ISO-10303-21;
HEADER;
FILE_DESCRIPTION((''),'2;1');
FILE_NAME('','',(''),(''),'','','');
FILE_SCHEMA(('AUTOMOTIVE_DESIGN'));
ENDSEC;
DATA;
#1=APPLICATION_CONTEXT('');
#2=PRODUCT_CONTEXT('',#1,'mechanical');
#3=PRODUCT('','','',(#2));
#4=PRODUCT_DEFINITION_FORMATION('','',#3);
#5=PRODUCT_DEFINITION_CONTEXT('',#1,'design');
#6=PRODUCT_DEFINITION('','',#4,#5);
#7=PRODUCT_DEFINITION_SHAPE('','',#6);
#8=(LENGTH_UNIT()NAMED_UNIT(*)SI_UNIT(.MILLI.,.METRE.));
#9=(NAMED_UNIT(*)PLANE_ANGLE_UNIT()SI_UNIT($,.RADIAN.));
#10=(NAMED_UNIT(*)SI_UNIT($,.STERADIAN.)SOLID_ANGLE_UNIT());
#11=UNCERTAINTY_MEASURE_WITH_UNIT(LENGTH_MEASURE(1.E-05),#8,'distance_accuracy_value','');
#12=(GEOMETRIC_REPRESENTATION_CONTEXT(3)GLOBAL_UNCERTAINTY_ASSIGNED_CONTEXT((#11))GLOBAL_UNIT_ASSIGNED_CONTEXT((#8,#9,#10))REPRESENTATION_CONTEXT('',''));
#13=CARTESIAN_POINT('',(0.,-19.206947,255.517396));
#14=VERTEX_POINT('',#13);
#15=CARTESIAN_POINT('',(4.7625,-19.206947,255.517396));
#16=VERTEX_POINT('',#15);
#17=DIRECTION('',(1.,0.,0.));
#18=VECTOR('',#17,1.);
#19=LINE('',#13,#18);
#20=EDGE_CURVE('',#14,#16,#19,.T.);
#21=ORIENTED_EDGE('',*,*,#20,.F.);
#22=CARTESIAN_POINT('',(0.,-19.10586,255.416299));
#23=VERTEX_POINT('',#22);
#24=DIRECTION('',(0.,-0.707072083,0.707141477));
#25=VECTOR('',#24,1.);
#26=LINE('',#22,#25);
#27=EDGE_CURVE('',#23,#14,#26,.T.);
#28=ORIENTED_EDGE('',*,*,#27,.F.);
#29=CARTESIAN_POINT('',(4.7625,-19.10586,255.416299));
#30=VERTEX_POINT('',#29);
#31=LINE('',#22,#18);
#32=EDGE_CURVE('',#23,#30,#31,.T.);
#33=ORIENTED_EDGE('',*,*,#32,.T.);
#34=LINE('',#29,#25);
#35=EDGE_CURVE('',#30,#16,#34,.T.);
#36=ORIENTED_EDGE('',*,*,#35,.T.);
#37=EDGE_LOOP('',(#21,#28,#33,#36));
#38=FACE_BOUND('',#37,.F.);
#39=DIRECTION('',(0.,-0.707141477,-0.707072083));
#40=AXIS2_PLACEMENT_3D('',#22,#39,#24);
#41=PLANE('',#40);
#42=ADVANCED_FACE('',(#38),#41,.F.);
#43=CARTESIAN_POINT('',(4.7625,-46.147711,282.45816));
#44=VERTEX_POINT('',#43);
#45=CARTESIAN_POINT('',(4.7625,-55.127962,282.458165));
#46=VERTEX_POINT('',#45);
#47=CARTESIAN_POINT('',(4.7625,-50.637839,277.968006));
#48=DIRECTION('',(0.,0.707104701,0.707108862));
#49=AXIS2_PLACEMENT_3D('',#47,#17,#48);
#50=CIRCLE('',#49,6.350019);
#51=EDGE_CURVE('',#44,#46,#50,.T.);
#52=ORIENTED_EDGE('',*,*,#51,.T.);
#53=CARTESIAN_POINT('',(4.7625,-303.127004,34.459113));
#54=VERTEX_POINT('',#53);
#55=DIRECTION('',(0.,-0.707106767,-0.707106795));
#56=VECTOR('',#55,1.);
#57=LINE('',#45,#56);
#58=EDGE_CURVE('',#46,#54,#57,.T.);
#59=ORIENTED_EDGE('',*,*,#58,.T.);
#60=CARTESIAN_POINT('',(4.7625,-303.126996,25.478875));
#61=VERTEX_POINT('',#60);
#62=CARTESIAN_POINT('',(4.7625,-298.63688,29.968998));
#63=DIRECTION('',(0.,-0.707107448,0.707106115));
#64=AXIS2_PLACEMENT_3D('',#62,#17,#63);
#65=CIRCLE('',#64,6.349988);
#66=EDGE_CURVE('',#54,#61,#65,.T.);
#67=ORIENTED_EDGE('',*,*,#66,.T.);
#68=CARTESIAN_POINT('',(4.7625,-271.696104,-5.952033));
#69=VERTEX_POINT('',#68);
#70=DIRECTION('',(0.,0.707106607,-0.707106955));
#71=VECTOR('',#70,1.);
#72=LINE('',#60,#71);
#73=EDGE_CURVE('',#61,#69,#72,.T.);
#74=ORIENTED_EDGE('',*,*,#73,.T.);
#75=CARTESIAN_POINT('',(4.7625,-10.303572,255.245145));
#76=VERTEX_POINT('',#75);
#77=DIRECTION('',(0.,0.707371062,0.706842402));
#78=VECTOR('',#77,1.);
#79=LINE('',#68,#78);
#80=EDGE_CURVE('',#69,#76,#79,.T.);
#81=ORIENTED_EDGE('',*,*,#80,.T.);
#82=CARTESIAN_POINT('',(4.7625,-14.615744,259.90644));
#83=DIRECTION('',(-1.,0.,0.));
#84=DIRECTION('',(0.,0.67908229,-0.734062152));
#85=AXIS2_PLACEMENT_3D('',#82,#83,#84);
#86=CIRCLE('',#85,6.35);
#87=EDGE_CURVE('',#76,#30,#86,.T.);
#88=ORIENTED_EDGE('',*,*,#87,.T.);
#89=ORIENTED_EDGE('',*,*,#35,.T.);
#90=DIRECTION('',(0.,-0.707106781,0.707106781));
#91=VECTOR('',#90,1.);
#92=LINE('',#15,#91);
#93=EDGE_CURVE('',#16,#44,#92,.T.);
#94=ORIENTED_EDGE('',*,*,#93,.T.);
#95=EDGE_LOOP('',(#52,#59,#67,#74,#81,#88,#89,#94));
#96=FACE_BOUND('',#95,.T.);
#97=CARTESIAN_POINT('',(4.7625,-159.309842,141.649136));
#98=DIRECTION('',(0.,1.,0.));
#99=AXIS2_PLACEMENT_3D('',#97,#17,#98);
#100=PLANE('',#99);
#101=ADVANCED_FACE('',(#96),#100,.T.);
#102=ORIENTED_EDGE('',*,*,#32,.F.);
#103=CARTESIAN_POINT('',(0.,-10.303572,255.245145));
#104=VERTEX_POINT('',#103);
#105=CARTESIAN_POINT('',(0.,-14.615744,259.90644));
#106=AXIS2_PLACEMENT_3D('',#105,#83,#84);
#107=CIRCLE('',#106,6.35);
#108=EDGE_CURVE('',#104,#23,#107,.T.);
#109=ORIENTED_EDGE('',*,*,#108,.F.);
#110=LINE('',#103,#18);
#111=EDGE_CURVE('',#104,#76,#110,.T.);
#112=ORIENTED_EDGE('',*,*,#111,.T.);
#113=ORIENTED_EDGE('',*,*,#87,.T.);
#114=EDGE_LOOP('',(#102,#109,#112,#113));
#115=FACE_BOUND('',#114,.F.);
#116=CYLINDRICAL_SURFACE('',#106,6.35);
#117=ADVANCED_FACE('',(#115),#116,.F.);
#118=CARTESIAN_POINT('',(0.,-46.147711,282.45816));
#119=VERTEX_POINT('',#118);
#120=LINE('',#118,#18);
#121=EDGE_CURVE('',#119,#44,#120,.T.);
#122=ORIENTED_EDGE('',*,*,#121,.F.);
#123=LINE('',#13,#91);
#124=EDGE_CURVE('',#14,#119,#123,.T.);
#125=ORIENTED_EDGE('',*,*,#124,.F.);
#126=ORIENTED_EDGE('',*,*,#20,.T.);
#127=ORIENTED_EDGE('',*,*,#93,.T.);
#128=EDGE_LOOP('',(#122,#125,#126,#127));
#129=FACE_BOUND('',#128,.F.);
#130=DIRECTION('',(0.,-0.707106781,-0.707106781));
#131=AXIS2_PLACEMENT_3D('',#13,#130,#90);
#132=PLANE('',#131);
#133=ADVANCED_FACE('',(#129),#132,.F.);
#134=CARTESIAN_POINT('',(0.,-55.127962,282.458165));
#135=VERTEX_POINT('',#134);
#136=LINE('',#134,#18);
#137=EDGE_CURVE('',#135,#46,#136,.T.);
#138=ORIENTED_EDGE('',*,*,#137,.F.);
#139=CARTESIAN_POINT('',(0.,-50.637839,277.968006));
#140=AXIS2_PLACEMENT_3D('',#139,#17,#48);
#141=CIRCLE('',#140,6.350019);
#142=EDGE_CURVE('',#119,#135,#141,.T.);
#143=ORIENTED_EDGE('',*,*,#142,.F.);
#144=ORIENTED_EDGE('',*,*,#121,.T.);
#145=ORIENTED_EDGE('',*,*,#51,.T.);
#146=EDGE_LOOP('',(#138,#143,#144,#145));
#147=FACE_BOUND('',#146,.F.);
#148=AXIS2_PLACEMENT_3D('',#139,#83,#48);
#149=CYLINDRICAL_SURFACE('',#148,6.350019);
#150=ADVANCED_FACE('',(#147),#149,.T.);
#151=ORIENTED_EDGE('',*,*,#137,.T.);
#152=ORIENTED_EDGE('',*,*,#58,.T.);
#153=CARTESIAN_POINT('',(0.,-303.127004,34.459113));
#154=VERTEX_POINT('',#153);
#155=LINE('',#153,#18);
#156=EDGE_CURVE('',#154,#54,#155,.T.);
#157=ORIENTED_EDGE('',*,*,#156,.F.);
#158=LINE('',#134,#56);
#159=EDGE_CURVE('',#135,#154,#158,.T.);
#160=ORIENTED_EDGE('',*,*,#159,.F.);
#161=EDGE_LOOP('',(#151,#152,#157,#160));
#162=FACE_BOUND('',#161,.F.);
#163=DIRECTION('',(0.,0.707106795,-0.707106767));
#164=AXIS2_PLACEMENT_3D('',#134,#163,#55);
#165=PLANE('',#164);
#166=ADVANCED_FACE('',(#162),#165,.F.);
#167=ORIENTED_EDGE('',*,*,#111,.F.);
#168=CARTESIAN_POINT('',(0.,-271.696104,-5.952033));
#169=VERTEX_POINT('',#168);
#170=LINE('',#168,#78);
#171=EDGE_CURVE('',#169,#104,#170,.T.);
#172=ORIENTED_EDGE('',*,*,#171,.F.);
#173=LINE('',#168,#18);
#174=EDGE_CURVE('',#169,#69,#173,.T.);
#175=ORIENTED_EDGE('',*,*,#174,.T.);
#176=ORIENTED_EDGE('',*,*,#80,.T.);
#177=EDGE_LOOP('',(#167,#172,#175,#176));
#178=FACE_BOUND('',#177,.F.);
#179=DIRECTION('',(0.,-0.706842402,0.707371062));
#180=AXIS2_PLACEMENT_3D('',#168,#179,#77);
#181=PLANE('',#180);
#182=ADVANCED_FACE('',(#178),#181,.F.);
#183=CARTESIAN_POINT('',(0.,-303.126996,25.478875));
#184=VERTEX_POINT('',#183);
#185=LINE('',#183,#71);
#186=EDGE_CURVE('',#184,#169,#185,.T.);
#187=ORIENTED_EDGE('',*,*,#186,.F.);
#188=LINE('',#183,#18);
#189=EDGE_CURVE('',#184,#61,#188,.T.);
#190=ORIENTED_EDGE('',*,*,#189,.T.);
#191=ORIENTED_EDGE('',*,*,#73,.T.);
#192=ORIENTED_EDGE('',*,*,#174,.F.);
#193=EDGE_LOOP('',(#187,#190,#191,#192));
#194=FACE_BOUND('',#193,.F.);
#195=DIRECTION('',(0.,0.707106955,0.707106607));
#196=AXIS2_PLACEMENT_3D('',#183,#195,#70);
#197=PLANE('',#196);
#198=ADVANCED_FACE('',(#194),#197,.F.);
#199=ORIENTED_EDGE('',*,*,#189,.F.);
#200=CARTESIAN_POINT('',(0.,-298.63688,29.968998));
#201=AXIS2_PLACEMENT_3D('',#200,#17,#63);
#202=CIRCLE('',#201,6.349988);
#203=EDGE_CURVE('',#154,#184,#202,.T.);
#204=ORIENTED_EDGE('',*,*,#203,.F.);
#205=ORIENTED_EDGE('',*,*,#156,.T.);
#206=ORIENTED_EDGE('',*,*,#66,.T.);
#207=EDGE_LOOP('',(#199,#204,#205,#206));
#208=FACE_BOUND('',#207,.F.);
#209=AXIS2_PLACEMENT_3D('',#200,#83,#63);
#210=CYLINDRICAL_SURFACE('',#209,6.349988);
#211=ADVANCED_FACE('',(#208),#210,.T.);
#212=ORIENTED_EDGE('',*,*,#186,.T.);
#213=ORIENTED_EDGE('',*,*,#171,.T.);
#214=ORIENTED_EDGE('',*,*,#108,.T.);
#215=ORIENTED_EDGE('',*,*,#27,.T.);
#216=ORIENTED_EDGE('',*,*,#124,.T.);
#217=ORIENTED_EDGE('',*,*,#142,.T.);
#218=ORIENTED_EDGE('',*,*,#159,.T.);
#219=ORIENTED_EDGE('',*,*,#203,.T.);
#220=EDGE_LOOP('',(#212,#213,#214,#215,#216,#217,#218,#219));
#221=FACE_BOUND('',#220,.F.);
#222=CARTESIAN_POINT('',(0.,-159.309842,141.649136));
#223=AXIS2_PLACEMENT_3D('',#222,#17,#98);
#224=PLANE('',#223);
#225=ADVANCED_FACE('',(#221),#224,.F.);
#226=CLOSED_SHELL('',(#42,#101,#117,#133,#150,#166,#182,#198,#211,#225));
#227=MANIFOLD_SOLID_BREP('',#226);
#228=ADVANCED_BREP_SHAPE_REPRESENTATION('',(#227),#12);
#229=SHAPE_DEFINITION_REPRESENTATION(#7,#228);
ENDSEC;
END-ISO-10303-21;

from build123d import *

# Parameters (mm, degrees)
F1_DEPTH = 4.7625


# Not quite as in the source:
# - ends of sketch curves that miss each other by under 0.0002 mm in the source are joined


with BuildPart() as f1:
    # F0 (on Right) → F1 (new body)
    with BuildSketch(Plane.YZ):
        with BuildLine():
            ThreePointArc((-10.3035716562, 255.2451451351), (-14.739191866, 253.5576398603), (-19.1058595605, 255.4162990395))
            Line((-19.1058595605, 255.4162990395), (-19.2069466, 255.517396))
            Line((-19.2069466, 255.517396), (-46.1477106, 282.45816))
            ThreePointArc((-46.1477106, 282.45816), (-50.6378374197, 284.3180242), (-55.1279617605, 282.4581649605))
            Line((-55.1279617605, 282.4581649605), (-303.1270036, 34.4591132))
            ThreePointArc((-303.1270036, 34.4591132), (-304.9868678, 29.9689938197), (-303.1269958605, 25.4788747395))
            Line((-303.1269958605, 25.4788747395), (-271.6961038, -5.9520328))
            Line((-271.6961038, -5.9520328), (-10.3035716562, 255.2451451351))
        make_face()
    extrude(amount=F1_DEPTH)


solid = f1.part
